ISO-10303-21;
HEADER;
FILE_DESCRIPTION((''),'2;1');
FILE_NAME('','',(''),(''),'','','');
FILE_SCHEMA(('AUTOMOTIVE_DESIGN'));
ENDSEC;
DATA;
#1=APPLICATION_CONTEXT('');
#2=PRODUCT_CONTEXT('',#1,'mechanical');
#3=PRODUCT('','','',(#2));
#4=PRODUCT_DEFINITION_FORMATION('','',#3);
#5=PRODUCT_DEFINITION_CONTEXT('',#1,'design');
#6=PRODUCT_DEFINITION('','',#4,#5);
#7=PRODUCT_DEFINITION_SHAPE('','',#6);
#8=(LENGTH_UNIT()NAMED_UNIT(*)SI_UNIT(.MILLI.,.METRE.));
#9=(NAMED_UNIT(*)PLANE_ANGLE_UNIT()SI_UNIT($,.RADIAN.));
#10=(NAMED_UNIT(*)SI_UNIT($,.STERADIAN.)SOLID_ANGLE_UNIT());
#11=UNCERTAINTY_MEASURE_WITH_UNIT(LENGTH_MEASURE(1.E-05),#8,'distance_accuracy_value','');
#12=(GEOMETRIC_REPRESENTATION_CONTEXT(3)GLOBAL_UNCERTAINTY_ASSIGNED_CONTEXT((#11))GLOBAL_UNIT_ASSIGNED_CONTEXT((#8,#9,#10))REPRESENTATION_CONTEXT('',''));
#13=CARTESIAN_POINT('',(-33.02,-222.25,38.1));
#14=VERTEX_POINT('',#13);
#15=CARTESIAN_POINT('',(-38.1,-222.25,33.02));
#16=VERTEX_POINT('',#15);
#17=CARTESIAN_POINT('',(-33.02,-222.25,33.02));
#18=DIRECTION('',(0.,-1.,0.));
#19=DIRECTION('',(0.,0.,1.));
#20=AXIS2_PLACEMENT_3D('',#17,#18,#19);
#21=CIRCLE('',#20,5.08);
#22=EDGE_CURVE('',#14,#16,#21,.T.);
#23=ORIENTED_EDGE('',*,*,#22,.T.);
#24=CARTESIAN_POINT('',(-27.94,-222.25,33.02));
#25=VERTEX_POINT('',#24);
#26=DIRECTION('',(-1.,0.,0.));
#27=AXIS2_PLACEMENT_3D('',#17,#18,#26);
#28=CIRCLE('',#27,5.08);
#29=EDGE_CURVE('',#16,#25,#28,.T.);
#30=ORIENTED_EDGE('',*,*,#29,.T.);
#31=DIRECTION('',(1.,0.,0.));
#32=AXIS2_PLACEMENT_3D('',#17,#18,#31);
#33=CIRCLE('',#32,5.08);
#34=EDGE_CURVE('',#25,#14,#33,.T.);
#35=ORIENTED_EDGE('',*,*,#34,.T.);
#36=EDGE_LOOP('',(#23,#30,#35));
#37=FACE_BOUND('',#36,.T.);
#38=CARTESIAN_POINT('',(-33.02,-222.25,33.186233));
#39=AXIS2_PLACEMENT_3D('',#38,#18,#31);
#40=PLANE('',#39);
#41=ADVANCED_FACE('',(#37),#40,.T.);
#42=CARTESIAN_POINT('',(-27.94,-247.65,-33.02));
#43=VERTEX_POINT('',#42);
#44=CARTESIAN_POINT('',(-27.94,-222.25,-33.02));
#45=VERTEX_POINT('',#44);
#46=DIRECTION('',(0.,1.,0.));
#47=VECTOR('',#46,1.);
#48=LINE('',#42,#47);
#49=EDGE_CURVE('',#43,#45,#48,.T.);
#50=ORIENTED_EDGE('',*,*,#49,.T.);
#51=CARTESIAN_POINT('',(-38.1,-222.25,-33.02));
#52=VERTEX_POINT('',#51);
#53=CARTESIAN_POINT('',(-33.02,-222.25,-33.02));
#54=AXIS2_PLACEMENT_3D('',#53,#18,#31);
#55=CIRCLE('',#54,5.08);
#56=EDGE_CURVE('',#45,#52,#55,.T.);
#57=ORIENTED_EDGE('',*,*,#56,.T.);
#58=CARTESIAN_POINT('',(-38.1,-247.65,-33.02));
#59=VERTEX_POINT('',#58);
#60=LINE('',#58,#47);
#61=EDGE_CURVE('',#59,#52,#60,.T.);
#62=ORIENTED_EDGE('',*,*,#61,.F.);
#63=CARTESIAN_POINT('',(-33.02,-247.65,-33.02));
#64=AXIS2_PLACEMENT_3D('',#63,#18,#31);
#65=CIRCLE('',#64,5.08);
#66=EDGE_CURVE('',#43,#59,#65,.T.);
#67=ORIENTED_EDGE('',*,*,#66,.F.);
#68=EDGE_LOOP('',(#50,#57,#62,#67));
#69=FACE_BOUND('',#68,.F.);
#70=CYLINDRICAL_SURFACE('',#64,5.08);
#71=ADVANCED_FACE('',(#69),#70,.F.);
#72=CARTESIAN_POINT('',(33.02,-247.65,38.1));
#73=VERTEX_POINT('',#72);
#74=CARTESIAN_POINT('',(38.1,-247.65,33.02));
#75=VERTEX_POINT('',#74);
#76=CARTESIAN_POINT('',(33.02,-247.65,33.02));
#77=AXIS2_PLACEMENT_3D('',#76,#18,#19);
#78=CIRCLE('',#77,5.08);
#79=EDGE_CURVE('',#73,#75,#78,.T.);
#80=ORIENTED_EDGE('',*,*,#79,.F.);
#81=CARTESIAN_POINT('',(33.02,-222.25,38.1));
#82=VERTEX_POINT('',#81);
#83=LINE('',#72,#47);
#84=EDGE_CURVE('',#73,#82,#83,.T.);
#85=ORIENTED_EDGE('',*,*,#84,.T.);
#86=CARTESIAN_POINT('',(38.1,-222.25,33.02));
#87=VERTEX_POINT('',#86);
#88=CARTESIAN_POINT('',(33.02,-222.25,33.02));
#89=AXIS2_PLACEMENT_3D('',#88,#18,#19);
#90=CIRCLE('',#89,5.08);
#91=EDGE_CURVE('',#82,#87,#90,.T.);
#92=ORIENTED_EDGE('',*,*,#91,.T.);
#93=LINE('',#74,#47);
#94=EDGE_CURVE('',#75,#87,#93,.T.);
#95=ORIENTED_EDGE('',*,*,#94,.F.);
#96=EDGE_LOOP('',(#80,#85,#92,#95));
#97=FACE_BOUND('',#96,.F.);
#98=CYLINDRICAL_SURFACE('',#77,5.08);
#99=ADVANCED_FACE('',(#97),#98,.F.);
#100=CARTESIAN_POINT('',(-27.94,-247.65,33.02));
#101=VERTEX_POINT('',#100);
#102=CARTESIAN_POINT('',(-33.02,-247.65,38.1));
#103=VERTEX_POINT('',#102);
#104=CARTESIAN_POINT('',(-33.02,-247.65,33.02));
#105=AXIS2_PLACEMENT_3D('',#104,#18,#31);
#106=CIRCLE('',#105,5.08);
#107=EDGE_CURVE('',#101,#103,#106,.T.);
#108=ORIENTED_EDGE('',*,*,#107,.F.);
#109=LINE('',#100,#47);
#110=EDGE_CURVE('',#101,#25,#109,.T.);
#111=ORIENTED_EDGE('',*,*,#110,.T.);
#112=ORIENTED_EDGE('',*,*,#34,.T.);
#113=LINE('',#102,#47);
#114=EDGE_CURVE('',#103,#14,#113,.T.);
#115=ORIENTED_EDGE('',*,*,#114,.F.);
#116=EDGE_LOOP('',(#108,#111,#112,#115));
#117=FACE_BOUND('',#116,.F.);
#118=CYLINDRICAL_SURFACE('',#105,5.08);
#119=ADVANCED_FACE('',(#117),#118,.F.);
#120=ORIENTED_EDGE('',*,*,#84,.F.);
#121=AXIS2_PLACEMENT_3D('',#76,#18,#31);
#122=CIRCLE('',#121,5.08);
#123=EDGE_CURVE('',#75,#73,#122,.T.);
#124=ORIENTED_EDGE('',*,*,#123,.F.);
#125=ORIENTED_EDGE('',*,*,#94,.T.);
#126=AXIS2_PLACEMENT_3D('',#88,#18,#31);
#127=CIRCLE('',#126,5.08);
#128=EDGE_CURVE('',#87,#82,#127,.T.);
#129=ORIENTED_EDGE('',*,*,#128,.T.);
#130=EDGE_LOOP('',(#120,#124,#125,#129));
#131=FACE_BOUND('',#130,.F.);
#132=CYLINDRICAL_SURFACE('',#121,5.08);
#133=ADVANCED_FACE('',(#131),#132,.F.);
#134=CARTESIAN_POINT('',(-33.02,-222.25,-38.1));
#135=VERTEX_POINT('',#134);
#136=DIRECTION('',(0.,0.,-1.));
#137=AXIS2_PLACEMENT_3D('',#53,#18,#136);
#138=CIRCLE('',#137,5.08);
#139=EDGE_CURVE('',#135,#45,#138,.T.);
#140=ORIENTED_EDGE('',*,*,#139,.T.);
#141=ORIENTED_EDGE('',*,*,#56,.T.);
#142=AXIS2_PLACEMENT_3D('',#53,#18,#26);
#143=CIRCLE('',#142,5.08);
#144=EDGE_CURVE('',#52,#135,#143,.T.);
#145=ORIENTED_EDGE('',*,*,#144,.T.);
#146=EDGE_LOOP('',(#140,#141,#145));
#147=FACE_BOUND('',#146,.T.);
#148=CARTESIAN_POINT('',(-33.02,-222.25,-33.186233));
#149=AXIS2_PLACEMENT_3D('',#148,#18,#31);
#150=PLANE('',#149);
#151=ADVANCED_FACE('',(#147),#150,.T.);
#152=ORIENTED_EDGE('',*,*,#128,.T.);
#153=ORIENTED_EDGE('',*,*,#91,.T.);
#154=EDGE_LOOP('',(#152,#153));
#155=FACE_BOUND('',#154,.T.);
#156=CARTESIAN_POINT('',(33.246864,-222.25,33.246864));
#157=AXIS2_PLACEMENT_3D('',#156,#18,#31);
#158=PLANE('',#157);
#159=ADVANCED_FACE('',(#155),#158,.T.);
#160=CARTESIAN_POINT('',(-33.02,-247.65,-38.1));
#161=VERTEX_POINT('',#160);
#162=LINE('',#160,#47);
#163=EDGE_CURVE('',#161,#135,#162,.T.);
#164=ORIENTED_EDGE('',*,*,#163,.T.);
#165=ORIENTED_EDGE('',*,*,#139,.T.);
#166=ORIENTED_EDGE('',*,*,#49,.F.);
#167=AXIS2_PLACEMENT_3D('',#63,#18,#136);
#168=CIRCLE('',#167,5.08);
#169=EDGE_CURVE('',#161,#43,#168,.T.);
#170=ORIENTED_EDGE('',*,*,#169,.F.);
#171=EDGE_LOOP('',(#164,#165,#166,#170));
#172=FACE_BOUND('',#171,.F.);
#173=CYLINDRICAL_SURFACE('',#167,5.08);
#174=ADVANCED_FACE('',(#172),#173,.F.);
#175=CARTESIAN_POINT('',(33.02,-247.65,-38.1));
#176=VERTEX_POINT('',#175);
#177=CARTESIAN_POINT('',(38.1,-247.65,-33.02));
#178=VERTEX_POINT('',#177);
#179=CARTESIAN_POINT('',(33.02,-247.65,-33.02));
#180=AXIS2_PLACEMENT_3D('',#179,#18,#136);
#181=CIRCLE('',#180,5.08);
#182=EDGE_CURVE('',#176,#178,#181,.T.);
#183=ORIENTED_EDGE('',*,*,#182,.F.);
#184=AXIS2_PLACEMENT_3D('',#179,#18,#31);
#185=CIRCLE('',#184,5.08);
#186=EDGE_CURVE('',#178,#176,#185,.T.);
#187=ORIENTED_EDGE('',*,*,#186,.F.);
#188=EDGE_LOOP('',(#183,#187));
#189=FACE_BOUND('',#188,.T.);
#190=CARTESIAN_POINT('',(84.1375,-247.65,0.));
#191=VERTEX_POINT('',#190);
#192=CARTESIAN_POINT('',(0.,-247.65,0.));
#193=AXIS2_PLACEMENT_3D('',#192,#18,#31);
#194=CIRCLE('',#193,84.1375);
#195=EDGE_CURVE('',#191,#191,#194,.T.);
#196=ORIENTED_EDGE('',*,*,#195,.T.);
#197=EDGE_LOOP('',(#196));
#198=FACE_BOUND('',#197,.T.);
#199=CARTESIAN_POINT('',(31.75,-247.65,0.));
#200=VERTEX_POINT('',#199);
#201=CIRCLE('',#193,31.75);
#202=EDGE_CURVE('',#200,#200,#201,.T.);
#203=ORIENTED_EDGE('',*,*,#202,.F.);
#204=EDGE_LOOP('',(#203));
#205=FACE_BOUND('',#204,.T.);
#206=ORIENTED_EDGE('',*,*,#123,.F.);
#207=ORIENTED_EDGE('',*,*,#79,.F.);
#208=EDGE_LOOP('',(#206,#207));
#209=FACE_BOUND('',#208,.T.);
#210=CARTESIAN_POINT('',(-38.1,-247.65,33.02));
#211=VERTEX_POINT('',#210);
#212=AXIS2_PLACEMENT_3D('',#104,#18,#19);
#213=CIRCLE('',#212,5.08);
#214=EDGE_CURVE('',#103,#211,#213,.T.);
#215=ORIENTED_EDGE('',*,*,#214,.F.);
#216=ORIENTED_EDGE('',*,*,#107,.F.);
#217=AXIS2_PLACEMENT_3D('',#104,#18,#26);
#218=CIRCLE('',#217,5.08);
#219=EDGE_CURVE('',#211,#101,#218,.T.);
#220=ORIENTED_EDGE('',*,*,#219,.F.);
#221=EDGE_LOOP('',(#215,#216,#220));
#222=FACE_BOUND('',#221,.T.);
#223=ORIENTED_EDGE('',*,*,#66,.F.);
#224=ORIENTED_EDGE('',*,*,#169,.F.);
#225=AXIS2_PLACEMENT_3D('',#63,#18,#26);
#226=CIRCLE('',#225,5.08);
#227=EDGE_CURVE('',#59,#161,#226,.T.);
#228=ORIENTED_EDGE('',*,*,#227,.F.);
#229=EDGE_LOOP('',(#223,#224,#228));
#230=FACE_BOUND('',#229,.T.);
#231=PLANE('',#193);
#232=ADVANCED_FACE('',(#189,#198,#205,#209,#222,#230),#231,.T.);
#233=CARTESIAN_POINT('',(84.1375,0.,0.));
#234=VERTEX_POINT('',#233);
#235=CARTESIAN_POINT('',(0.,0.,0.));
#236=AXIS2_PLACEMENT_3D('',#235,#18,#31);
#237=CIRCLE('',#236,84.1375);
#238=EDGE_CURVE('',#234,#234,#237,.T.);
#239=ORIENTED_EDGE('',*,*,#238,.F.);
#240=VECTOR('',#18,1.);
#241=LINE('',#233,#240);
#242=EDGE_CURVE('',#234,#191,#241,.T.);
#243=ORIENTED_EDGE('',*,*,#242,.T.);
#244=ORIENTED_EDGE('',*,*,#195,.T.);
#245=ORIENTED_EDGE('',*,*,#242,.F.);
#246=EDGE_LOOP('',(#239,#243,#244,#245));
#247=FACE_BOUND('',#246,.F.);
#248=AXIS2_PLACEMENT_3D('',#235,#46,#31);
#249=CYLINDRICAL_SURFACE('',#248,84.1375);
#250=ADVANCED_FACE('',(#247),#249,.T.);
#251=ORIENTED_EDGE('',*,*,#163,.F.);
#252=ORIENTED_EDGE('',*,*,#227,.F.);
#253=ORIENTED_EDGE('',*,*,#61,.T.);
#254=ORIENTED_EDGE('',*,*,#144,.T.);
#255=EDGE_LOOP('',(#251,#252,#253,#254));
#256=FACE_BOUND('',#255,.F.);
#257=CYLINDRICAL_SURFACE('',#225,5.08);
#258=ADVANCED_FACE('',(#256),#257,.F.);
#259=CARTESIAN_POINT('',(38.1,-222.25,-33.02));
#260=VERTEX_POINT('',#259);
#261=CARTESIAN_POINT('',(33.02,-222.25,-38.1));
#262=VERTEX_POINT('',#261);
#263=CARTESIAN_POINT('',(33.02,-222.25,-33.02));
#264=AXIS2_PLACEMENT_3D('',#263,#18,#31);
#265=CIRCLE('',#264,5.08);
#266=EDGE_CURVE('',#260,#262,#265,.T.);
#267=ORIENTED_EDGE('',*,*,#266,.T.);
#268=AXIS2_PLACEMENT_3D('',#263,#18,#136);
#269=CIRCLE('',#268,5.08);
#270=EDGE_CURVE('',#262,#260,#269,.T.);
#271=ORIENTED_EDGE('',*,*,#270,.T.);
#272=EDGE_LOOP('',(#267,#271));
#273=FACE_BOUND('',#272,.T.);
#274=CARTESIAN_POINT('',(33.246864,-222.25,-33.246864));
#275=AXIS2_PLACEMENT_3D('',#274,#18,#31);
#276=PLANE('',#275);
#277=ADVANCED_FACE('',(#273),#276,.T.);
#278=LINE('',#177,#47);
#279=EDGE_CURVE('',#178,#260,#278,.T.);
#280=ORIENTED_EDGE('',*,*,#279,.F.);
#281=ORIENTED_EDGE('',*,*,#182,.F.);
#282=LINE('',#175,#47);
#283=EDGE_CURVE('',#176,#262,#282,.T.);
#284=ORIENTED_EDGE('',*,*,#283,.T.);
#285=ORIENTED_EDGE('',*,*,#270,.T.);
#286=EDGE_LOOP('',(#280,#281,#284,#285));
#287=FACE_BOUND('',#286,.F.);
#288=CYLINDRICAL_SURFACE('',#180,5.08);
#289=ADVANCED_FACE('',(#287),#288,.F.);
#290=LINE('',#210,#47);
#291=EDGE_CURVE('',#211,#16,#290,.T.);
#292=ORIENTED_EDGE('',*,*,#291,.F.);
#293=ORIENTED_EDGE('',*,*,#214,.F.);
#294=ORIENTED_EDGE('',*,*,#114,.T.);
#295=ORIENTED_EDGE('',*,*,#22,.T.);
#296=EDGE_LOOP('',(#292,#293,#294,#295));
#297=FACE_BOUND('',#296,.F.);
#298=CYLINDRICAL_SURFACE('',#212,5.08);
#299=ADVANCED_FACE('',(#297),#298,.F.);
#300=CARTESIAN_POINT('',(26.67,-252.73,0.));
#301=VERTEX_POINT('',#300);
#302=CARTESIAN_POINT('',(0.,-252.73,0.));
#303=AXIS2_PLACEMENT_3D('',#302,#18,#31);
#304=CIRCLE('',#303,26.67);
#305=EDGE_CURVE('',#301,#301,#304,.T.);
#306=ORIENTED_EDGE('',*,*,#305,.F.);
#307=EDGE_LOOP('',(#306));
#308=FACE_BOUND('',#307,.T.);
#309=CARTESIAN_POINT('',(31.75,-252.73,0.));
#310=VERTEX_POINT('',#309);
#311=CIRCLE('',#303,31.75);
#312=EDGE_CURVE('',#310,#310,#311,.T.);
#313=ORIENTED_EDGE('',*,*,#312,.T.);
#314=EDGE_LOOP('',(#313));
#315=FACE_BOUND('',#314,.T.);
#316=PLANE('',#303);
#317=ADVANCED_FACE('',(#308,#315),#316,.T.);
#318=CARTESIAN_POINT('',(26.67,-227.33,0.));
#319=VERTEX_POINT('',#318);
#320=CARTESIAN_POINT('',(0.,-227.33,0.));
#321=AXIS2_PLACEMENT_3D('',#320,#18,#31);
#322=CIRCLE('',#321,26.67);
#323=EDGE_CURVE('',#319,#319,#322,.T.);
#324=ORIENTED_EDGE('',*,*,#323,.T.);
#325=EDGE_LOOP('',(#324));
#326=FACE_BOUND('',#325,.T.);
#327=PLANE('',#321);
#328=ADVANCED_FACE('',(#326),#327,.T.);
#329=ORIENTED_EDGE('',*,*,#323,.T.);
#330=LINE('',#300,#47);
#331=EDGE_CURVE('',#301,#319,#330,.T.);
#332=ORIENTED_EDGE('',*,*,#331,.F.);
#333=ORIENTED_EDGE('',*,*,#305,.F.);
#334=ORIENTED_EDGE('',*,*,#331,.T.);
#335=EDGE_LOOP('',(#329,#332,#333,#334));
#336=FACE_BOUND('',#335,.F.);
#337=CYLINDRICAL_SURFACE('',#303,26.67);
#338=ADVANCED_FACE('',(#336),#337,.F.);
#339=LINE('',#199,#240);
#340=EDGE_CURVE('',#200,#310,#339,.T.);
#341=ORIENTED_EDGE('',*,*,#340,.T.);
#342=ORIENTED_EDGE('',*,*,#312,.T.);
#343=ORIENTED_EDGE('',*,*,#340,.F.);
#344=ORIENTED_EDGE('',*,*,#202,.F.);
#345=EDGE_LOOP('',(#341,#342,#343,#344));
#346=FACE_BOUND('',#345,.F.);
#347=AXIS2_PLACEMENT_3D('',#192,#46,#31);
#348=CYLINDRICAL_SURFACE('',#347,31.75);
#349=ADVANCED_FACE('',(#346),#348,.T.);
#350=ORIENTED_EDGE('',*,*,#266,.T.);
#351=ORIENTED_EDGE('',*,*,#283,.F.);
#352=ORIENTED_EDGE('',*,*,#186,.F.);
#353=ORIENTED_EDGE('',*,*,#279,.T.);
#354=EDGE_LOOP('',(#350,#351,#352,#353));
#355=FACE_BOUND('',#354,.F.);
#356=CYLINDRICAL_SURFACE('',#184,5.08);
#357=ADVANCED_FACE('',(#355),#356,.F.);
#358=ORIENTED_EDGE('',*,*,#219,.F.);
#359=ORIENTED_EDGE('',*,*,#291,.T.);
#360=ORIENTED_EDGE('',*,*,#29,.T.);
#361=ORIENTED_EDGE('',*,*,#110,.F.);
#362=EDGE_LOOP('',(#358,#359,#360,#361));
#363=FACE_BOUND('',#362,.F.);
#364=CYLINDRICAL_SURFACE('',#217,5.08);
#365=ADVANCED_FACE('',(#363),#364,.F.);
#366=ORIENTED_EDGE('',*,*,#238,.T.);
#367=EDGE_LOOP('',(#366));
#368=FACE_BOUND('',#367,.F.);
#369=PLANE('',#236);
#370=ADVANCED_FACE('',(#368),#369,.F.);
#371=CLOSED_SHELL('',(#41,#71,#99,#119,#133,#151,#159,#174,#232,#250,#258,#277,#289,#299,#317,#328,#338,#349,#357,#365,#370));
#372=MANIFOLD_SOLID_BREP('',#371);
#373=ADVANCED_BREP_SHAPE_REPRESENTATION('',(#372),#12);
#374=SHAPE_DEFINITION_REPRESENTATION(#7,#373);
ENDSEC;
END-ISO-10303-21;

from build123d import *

# Parameters (mm, degrees)
F0_R     = 84.1375
F1_DEPTH = 247.65
F2_R     = 31.75
F3_DEPTH = 5.08
F5_DEPTH = 25.4
F6_R     = 26.67
F7_DEPTH = 25.4


# Not quite as in the source:
# - a feature names something its author has since deleted; it is built from what else it names


with BuildPart() as f1:
    # F0 (on Front) → F1 (new body)
    with BuildSketch(Plane.XZ):
        Circle(F0_R)
    extrude(amount=F1_DEPTH)

    # F2 (on face) → F3 (join)
    with BuildSketch(Plane.XZ.offset(247.65)):
        Circle(F2_R)
    extrude(amount=F3_DEPTH)

    # F4 (on face) → F5 (cut)
    with BuildSketch(Plane.XZ.offset(247.65)):
        with BuildLine():
            ThreePointArc((-27.94, 33.02), (-29.4278975516, 36.6121024484), (-33.02, 38.1))
            ThreePointArc((-33.02, 38.1), (-36.6121024484, 36.6121024484), (-38.1, 33.02))
            ThreePointArc((-38.1, 33.02), (-33.02, 27.94), (-27.94, 33.02))
        make_face()
        with BuildLine():
            ThreePointArc((38.1, 33.02), (36.6121024484, 36.6121024484), (33.02, 38.1))
            ThreePointArc((33.02, 38.1), (29.4278975516, 29.4278975516), (38.1, 33.02))
        make_face()
        with BuildLine():
            ThreePointArc((33.02, -38.1), (36.6121024484, -36.6121024484), (38.1, -33.02))
            ThreePointArc((38.1, -33.02), (29.4278975516, -29.4278975516), (33.02, -38.1))
        make_face()
        with BuildLine():
            ThreePointArc((-27.94, -33.02), (-33.02, -27.94), (-38.1, -33.02))
            ThreePointArc((-38.1, -33.02), (-36.6121024484, -36.6121024484), (-33.02, -38.1))
            ThreePointArc((-33.02, -38.1), (-29.4278975516, -36.6121024484), (-27.94, -33.02))
        make_face()
    extrude(amount=-F5_DEPTH, mode=Mode.SUBTRACT)

    # F6 (on face) → F7 (cut)
    with BuildSketch(Plane.XZ.offset(252.73)):
        Circle(F6_R)
    extrude(amount=-F7_DEPTH, mode=Mode.SUBTRACT)


solid = f1.part
